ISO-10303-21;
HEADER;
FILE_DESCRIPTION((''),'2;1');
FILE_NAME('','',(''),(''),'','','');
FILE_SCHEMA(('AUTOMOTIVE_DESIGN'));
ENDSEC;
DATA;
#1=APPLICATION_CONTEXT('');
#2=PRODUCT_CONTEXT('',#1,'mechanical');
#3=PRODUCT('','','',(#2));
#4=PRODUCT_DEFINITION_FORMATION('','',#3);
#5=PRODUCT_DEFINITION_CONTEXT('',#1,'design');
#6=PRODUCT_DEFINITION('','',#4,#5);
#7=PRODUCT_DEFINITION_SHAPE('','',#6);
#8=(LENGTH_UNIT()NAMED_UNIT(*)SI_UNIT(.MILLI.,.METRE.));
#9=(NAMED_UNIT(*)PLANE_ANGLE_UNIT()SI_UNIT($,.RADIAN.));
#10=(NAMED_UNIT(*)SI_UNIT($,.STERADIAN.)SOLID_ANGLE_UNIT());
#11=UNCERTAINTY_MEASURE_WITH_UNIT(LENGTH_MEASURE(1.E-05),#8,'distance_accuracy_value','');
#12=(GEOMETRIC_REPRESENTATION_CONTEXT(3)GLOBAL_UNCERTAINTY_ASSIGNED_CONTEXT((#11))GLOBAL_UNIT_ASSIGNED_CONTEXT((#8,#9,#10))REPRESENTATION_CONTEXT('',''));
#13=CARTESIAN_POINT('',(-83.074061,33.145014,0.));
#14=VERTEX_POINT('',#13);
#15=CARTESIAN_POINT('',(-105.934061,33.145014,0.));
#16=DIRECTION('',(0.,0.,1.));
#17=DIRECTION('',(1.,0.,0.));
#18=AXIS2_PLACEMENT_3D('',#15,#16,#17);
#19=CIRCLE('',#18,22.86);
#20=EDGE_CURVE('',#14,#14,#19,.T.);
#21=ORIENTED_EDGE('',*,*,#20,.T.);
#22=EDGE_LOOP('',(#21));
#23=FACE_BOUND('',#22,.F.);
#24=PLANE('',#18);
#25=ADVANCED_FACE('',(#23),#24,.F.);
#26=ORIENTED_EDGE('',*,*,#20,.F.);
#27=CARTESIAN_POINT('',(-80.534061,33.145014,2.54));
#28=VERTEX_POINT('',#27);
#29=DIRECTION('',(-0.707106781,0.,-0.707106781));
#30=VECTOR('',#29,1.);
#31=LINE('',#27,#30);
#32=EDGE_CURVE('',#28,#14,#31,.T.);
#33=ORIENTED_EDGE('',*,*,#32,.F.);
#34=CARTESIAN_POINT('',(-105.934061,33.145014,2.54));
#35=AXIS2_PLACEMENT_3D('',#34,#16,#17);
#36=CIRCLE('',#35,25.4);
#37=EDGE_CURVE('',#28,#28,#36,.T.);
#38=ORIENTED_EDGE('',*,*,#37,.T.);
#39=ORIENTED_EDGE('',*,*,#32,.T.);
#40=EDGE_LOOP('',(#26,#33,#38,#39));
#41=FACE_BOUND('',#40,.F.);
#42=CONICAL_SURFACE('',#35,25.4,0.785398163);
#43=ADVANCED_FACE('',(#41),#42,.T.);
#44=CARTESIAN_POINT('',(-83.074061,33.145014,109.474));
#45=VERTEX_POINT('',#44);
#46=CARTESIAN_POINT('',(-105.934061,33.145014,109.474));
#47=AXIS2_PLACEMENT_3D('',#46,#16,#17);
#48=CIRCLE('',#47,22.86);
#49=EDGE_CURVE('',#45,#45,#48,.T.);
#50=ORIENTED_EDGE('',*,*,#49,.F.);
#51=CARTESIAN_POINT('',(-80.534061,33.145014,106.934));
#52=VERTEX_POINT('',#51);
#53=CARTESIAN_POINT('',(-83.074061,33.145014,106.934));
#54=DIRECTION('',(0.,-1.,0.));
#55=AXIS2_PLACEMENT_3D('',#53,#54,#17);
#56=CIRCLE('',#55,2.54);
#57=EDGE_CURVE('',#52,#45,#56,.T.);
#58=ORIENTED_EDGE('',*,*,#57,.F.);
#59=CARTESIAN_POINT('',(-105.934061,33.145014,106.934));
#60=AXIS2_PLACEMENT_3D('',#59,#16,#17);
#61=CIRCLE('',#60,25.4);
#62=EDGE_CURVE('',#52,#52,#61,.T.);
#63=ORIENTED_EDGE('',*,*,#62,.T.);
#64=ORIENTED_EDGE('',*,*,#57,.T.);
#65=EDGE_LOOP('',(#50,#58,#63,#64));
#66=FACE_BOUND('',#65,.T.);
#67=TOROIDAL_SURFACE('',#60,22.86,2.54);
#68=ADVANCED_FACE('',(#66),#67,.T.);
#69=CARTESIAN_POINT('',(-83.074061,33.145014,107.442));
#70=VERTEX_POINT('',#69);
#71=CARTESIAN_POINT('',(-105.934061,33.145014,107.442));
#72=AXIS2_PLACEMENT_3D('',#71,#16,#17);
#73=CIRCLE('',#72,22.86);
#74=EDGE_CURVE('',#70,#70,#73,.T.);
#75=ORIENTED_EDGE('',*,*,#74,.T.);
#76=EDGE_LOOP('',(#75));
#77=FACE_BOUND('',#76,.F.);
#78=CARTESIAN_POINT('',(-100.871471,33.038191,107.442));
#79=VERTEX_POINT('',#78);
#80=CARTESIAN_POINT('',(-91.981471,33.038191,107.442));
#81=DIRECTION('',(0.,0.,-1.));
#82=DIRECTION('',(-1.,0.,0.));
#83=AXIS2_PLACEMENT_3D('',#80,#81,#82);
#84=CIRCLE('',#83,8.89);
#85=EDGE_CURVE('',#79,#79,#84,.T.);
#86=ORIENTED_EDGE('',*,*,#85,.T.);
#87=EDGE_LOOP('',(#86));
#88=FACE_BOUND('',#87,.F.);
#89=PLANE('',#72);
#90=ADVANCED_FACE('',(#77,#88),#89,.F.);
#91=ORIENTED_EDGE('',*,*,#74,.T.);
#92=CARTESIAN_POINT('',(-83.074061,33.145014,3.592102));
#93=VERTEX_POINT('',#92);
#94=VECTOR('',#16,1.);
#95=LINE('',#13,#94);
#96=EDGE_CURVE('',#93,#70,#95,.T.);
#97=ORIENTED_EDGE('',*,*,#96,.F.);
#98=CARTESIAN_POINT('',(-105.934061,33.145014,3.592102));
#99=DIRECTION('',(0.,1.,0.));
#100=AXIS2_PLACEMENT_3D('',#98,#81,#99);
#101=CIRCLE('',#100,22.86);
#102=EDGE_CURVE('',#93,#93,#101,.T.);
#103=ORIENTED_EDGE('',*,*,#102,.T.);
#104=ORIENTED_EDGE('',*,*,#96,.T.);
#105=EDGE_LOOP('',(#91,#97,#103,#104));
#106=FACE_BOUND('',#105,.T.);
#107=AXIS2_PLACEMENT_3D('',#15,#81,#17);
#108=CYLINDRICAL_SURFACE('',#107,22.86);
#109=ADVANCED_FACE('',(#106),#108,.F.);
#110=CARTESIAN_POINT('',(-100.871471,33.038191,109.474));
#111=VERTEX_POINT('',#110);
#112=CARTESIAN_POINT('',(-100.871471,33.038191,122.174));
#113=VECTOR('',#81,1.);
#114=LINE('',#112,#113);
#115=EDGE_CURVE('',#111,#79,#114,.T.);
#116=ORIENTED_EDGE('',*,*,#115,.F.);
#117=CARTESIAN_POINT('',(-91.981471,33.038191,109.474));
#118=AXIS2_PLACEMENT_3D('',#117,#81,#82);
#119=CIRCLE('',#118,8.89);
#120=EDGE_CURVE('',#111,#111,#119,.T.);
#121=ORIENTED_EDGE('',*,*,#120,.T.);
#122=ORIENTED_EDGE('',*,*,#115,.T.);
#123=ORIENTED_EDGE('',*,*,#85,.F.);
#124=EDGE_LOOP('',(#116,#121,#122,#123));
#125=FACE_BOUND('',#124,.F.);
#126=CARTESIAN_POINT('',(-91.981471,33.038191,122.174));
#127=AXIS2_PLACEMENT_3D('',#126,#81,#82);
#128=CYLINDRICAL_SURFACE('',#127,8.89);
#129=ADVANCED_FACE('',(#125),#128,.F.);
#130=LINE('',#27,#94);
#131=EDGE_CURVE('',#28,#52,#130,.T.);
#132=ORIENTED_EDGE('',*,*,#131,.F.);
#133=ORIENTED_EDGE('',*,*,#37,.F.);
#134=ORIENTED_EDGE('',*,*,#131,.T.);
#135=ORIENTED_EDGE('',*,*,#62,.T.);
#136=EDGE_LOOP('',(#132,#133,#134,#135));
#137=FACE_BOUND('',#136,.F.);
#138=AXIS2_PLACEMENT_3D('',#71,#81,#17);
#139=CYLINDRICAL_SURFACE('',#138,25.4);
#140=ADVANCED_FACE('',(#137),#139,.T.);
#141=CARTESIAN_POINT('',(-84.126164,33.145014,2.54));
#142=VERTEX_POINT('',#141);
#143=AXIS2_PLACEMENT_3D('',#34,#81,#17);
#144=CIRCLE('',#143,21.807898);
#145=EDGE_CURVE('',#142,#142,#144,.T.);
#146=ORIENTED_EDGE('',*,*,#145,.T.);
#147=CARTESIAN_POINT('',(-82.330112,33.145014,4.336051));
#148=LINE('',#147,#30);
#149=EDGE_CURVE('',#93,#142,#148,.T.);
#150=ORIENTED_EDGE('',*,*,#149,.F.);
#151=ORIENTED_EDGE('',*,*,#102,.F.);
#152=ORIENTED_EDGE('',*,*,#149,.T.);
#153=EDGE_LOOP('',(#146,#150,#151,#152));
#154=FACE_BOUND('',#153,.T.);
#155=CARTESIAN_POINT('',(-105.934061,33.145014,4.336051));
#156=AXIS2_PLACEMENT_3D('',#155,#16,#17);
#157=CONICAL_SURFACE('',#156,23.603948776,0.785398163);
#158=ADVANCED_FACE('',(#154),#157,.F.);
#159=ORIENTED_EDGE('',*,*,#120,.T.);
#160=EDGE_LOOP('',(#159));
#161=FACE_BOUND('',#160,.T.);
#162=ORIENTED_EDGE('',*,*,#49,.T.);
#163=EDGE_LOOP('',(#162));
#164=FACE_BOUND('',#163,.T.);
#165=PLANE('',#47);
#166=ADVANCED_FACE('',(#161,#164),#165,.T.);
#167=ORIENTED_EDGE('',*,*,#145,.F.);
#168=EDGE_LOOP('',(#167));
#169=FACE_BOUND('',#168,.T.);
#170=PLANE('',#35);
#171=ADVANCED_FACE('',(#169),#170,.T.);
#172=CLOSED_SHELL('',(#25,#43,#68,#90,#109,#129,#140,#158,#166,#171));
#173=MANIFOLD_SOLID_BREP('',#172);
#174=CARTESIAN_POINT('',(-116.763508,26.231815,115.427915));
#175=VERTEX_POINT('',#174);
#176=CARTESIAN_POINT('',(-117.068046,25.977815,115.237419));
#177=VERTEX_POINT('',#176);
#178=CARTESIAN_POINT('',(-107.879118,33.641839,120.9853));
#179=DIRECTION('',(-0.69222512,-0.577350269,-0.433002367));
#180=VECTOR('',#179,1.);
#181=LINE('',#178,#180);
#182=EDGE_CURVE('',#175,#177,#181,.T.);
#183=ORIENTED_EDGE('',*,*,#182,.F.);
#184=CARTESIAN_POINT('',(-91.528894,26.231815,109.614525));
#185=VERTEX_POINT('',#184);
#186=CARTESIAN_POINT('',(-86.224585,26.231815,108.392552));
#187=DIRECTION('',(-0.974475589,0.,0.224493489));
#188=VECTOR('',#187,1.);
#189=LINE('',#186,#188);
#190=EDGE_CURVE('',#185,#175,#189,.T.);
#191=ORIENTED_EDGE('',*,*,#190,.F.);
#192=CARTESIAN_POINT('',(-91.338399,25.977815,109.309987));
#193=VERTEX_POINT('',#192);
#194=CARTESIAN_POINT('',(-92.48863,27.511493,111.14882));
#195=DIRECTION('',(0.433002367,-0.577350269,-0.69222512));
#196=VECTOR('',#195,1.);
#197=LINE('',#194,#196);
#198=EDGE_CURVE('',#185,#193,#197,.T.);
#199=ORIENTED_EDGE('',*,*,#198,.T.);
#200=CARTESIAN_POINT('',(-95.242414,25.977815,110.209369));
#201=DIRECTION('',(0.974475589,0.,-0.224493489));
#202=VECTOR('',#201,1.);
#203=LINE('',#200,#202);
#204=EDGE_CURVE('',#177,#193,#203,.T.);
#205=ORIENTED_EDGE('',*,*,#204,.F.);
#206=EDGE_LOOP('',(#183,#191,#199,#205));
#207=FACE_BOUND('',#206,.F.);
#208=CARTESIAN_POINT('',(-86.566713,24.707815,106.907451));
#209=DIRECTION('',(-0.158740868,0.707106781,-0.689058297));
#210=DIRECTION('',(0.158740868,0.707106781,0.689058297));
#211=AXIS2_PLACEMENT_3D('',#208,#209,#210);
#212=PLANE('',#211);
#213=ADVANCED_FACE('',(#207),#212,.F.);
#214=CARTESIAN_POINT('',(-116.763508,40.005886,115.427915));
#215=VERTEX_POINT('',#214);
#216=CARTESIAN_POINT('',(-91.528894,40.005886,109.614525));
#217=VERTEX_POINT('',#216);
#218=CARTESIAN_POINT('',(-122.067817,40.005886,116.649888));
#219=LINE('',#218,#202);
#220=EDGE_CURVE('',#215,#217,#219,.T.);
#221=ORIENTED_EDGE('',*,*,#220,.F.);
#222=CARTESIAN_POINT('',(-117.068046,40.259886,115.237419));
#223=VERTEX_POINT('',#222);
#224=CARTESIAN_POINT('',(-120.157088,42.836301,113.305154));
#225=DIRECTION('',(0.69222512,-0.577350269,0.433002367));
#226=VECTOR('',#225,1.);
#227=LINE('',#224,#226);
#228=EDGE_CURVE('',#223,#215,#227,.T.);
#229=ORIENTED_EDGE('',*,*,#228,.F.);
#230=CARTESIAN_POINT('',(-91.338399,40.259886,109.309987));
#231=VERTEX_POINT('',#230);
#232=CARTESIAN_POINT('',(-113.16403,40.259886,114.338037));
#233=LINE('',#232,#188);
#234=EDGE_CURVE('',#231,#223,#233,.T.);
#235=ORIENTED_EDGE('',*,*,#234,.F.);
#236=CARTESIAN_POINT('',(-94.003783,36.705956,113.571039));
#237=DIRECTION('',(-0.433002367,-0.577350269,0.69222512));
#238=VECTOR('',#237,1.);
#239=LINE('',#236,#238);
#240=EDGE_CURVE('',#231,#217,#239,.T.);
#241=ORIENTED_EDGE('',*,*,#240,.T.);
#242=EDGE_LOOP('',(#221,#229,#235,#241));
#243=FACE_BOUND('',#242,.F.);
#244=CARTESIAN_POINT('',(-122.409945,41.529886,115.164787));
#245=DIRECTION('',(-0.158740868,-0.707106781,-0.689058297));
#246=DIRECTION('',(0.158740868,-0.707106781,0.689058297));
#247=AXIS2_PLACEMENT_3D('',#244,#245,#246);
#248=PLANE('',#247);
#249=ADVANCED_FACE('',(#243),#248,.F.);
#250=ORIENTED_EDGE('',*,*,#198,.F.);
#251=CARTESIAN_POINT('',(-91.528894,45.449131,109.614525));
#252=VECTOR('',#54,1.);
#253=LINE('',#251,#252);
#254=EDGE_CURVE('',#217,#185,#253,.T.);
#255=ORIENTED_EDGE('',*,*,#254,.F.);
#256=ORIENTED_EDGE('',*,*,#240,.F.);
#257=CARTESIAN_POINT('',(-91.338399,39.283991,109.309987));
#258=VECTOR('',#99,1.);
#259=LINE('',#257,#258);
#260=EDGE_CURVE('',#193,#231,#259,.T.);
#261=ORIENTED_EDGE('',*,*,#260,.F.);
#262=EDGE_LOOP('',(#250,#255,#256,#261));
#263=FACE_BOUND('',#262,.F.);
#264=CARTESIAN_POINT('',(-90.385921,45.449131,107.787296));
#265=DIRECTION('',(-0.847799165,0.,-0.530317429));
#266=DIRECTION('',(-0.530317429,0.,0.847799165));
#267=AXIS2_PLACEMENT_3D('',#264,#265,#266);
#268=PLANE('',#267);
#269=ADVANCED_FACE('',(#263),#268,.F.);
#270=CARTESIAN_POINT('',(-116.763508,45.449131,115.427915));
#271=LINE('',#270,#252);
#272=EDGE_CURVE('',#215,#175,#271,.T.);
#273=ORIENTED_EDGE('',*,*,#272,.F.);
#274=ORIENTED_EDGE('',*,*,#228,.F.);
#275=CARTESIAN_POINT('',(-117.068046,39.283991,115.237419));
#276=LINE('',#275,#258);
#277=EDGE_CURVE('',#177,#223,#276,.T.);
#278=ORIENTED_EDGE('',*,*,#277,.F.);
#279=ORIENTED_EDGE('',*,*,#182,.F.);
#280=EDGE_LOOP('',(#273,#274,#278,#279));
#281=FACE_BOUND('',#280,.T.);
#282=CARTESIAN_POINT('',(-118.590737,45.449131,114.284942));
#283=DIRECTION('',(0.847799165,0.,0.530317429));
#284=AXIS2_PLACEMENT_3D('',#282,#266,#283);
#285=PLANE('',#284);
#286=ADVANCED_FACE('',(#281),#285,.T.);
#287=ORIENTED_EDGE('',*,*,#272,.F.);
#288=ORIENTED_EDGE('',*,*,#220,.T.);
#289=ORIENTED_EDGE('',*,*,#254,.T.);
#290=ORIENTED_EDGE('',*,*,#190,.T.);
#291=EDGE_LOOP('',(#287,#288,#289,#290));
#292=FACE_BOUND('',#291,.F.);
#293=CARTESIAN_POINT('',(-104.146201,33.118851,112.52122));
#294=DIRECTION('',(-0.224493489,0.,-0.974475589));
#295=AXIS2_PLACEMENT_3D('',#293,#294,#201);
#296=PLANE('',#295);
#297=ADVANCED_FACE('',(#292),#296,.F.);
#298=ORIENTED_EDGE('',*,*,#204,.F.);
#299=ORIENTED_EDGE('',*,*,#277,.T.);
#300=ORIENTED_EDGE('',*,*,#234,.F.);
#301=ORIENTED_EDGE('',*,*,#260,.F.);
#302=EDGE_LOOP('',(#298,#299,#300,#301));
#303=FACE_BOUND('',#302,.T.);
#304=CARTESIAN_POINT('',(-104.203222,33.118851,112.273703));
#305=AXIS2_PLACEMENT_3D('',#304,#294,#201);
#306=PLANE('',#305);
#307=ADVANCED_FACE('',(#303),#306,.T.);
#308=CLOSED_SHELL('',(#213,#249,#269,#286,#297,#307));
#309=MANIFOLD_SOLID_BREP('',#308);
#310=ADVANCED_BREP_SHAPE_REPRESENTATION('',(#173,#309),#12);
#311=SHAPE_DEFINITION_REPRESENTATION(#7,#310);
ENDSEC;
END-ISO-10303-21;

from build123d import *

# Parameters (mm, degrees)
F0_R         = 25.4
F1_DEPTH     = 107.442
F2_SIZE      = 2.54
F3_T         = -2.54
F4_R         = 25.4
F5_DEPTH     = 2.032
F6_R         = 2.54
F10_W        = 28.9435833693
F10_H        = 16.822071746
F11_DEPTH    = 0.254
F13_D        = 17.78
F13_DEPTH    = 12.7
F13_TIP      = 5.3416509032
F14_T1_DEPTH = 24.6605614933
F14_T3_DEPTH = 36.7820731166
F14_T5_DEPTH = 36.7820731166


# Not quite as in the source:
# - a fillet or chamfer that OpenCascade refuses, or shapes differently, is made with other operations: its cross-section is extruded or revolved along the edge and cut away or added


with BuildPart() as f1:
    # F0 (on Top) → F1 (new body)
    with BuildSketch(Plane.XY):
        with Locations((-105.93406111, 33.1450141966)):
            Circle(F0_R)
    extrude(amount=F1_DEPTH)

    # F2
    f2_edges = [f1.edges().sort_by_distance(p)[0] for p in [
        (-131.334061, 33.145014, 0),
    ]]
    chamfer(f2_edges, length=F2_SIZE)

    # F3
    f3_openings = [f1.faces().sort_by_distance(p)[0] for p in [
        (-105.934061, 33.145014, 107.442),
    ]]
    offset(amount=F3_T, openings=f3_openings)

    # F4 (on face) → F5 (join)
    with BuildSketch(Plane.XY.offset(107.442)):
        with Locations((-105.93406111, 33.1450141966)):
            Circle(F4_R)
    extrude(amount=F5_DEPTH)

    # F6
    f6_edges = [f1.edges().sort_by_distance(p)[0] for p in [
        (-131.334061, 33.145014, 109.474),
    ]]
    fillet(f6_edges, radius=F6_R)

    # F13
    with Locations(Plane.XY.offset(109.474)):
        with Locations((-91.9814705849, 33.0381914973)):
            Hole(F13_D / 2, depth=F13_DEPTH)
            with Locations((0, 0, -(F13_DEPTH + F13_TIP / 2))):  # 118° drill point
                Cone(0, F13_D / 2, F13_TIP, mode=Mode.SUBTRACT)


with BuildPart() as f11:
    # F10 (on offset) → F11 (new body)
    with BuildSketch(Plane(origin=(19.3098159265, 0, 83.8195546276), x_dir=(0.974475589, 0, -0.2244934888), z_dir=(-0.2244934888, 0, -0.974475589))):
        with Locations((-126.7482116818, -33.1188505515)):
            Rectangle(F10_W, F10_H)
    extrude(amount=-F11_DEPTH)

    # F14: chamfer of 1.524 on 4 edges, made by hand

    # F14_s2 → F14_t1 (cut)
    with BuildSketch(Plane.XZ.offset(-45.4491312982)):
        Polygon((-118.5907367584, 114.2849418733), (-116.7635078839, 115.4279145939), (-118.2486086815, 115.7700426708), align=None)
        Polygon((-90.3859213079, 107.7872958644), (-91.5288940286, 109.6145247389), (-90.043793231, 109.272396662), align=None)
    extrude(amount=F14_T1_DEPTH, mode=Mode.SUBTRACT)

    # F14_s4 → F14_t3 (cut)
    with BuildSketch(Plane(origin=(-141.4346544107, 0, 32.5828161988), x_dir=(0, 1, 0), z_dir=(0.974475589, 0, -0.2244934888))):
        Polygon((41.5298864245, 84.7450378078), (40.0058864245, 86.2690378078), (41.5298864245, 86.2690378078), align=None)
    extrude(amount=F14_T3_DEPTH, mode=Mode.SUBTRACT)

    # F14_s6 → F14_t5 (cut)
    with BuildSketch(Plane(origin=(-105.5914220471, 0, 24.3254802797), x_dir=(0, 1, 0), z_dir=(-0.974475589, 0, 0.2244934888))):
        Polygon((24.7078146785, -84.7450378078), (26.2318146785, -86.2690378078), (24.7078146785, -86.2690378078), align=None)
    extrude(amount=F14_T5_DEPTH, mode=Mode.SUBTRACT)


solid = Compound([f1.part, f11.part])
